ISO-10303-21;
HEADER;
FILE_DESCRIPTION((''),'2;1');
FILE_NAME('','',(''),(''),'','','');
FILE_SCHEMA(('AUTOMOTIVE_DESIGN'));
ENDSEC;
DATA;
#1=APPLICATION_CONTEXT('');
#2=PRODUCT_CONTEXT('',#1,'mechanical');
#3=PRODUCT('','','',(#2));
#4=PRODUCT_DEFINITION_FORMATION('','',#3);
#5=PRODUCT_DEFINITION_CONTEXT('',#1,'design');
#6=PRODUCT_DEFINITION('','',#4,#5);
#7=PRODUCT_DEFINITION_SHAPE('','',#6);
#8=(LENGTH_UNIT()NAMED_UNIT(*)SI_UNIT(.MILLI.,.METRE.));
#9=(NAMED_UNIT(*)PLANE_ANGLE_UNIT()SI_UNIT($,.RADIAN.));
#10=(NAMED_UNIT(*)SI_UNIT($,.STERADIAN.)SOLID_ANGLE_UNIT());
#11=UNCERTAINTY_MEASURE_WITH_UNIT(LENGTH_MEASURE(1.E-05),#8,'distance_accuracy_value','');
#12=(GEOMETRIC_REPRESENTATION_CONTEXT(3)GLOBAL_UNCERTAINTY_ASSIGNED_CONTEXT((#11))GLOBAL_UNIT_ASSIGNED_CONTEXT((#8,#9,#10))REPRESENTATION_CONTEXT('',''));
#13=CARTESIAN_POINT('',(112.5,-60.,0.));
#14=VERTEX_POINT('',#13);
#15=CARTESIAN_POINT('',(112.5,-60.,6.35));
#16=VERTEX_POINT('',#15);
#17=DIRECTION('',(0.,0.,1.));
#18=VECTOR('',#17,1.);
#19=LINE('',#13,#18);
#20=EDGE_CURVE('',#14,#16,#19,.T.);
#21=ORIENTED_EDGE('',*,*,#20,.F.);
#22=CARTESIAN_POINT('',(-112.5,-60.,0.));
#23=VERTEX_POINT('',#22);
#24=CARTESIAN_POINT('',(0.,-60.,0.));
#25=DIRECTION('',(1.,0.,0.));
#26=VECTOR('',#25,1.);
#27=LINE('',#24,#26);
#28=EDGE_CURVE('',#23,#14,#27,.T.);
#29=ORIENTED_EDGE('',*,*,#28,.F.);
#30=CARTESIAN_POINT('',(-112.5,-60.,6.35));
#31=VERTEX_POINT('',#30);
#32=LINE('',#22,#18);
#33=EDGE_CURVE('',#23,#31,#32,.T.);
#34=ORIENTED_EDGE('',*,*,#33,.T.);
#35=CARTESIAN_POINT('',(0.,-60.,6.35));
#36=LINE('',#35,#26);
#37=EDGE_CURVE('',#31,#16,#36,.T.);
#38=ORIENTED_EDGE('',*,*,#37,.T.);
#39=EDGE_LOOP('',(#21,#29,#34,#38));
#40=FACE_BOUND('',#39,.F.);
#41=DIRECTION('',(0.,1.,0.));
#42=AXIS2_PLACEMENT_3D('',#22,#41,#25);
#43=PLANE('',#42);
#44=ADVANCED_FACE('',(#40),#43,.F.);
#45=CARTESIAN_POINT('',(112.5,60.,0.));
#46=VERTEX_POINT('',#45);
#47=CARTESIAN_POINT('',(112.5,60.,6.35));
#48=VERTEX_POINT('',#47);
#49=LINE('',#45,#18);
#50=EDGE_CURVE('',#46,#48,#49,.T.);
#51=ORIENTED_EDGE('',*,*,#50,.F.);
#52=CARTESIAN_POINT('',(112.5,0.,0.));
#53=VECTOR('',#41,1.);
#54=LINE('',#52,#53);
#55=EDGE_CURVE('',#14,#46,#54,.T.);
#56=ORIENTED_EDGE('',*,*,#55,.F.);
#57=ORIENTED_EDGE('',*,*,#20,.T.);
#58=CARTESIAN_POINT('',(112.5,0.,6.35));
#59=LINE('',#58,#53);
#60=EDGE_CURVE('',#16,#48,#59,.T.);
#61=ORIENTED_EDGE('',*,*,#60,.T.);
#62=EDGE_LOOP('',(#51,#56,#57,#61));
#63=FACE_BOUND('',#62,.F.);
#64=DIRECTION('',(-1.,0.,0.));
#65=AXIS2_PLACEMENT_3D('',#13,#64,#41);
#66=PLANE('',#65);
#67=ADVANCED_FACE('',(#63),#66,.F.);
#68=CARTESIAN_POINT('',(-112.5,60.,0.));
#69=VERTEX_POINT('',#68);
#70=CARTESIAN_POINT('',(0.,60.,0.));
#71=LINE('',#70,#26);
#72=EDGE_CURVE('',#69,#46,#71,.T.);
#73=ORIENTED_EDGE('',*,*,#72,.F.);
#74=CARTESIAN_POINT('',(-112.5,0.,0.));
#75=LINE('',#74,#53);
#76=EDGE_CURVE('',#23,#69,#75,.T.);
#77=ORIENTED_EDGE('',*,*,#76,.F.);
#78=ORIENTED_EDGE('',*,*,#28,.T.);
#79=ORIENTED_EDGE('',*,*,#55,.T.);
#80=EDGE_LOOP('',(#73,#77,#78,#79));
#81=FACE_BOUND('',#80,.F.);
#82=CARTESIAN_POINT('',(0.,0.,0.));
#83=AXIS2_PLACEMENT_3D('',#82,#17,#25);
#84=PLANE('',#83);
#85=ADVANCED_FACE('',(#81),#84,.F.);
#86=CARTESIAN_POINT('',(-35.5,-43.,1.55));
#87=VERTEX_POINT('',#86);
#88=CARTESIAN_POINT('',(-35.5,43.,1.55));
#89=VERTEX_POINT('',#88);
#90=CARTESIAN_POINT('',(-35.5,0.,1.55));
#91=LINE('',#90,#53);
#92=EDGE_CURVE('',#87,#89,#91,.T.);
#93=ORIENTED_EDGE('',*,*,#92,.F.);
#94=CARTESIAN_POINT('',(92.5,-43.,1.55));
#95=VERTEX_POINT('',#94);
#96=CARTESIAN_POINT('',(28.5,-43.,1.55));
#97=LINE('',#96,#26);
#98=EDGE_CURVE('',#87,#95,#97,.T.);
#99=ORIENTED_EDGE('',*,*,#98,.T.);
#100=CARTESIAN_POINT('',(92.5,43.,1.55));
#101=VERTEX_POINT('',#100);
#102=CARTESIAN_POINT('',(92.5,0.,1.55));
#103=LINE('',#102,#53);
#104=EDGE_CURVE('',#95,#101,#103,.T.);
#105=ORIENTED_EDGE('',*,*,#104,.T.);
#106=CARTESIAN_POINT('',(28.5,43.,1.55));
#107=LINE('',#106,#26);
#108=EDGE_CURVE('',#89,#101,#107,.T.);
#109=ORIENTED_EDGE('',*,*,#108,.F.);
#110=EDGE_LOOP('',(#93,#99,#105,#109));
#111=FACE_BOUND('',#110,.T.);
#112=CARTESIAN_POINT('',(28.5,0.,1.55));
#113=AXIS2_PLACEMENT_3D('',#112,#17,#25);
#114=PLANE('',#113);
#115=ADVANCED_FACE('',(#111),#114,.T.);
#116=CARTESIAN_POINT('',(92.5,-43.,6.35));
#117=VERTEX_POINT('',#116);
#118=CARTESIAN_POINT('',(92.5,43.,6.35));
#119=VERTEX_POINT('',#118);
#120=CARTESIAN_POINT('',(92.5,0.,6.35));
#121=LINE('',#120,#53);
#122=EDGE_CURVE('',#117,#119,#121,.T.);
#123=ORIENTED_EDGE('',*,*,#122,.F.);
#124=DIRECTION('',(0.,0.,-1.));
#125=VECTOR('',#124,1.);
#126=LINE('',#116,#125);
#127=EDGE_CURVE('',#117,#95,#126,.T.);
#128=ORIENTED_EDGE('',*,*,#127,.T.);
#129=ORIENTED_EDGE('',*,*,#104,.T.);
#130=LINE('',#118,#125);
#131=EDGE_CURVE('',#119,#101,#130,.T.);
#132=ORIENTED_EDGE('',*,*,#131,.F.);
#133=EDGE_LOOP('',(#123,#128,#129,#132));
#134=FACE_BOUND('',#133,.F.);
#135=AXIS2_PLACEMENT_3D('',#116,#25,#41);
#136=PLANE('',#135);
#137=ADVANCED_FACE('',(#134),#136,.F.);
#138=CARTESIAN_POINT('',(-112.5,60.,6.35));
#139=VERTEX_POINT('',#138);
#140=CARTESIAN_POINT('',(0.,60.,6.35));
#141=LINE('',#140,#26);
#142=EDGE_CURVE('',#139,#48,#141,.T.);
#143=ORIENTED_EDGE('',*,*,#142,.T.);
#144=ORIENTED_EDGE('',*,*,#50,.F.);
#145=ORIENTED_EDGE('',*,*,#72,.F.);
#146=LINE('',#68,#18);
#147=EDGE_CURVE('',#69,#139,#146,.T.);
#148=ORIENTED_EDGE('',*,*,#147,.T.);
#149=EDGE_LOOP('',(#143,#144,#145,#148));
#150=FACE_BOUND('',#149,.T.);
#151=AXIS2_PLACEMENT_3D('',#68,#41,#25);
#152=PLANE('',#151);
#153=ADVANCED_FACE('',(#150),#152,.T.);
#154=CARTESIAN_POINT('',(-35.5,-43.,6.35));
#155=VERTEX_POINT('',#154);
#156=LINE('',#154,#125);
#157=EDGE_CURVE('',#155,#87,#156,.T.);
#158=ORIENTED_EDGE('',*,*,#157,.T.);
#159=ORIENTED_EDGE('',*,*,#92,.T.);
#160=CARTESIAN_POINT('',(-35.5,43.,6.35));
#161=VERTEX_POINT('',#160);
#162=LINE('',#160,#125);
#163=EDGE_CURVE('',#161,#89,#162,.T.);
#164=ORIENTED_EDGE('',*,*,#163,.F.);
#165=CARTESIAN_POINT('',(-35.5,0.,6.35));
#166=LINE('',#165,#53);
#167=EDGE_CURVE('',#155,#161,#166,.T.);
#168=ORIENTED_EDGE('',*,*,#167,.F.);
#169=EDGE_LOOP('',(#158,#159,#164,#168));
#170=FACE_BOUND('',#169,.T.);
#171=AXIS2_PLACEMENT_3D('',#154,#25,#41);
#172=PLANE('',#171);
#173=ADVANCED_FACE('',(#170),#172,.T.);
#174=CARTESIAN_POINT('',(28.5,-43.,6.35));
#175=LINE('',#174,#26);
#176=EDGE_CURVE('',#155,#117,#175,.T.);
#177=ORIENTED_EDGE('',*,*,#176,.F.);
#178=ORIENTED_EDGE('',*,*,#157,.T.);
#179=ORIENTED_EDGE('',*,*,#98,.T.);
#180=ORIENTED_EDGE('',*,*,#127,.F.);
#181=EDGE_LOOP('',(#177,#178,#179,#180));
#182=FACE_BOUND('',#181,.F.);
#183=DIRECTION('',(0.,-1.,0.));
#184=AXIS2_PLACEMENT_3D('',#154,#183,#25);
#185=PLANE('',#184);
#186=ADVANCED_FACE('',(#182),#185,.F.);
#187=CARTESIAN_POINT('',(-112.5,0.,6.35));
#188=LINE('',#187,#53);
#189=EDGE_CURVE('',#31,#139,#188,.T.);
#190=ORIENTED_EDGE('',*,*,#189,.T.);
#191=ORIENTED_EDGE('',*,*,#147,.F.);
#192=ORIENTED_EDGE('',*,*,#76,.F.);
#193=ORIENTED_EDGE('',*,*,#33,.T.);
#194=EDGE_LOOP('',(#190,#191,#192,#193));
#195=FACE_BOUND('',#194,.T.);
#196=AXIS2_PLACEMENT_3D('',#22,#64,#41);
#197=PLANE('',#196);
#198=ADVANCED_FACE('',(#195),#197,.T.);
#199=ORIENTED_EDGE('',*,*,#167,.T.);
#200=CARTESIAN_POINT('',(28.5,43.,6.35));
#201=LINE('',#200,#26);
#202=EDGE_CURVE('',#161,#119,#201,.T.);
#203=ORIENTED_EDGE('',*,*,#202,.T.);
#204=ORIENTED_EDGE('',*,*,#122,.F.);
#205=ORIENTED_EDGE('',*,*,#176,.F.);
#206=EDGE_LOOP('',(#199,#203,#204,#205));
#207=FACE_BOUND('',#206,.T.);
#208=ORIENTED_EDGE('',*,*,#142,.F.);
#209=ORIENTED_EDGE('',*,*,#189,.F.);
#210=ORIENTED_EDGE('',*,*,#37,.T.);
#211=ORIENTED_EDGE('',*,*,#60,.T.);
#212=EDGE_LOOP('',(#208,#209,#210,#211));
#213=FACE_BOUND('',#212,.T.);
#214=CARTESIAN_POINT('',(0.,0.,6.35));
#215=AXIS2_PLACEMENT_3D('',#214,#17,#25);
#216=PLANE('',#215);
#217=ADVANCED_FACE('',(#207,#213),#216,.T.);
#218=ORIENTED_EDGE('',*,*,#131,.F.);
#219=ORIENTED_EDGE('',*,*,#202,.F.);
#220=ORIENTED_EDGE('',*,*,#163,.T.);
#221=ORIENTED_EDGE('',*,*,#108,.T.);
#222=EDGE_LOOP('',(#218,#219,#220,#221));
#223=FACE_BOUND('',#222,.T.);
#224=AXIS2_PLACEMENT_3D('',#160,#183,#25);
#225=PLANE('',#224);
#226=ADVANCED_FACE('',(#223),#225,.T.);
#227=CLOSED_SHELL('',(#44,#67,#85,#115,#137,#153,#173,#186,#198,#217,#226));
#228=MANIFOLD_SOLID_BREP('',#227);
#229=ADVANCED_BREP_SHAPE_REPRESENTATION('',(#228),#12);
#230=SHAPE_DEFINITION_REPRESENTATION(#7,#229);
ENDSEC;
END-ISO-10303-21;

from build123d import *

# Parameters (mm, degrees)
F0_W     = 225
F0_H     = 120
F1_DEPTH = 6.35
F2_W     = 128
F2_H     = 86
F3_DEPTH = 4.8


# Not quite as in the source:
# - a length typed as a fraction of an inch, garbled in the dataset ("3 / 203.2 mm" for 3/8 in), is restored


with BuildPart() as f1:
    # F0 (on Top) → F1 (new body)
    with BuildSketch(Plane.XY):
        Rectangle(F0_W, F0_H)
    extrude(amount=F1_DEPTH)

    # F2 (on face) → F3 (cut)
    with BuildSketch(Plane.XY.offset(6.35)):
        with Locations((28.5, 0)):
            Rectangle(F2_W, F2_H)
    extrude(amount=-F3_DEPTH, mode=Mode.SUBTRACT)


solid = f1.part
